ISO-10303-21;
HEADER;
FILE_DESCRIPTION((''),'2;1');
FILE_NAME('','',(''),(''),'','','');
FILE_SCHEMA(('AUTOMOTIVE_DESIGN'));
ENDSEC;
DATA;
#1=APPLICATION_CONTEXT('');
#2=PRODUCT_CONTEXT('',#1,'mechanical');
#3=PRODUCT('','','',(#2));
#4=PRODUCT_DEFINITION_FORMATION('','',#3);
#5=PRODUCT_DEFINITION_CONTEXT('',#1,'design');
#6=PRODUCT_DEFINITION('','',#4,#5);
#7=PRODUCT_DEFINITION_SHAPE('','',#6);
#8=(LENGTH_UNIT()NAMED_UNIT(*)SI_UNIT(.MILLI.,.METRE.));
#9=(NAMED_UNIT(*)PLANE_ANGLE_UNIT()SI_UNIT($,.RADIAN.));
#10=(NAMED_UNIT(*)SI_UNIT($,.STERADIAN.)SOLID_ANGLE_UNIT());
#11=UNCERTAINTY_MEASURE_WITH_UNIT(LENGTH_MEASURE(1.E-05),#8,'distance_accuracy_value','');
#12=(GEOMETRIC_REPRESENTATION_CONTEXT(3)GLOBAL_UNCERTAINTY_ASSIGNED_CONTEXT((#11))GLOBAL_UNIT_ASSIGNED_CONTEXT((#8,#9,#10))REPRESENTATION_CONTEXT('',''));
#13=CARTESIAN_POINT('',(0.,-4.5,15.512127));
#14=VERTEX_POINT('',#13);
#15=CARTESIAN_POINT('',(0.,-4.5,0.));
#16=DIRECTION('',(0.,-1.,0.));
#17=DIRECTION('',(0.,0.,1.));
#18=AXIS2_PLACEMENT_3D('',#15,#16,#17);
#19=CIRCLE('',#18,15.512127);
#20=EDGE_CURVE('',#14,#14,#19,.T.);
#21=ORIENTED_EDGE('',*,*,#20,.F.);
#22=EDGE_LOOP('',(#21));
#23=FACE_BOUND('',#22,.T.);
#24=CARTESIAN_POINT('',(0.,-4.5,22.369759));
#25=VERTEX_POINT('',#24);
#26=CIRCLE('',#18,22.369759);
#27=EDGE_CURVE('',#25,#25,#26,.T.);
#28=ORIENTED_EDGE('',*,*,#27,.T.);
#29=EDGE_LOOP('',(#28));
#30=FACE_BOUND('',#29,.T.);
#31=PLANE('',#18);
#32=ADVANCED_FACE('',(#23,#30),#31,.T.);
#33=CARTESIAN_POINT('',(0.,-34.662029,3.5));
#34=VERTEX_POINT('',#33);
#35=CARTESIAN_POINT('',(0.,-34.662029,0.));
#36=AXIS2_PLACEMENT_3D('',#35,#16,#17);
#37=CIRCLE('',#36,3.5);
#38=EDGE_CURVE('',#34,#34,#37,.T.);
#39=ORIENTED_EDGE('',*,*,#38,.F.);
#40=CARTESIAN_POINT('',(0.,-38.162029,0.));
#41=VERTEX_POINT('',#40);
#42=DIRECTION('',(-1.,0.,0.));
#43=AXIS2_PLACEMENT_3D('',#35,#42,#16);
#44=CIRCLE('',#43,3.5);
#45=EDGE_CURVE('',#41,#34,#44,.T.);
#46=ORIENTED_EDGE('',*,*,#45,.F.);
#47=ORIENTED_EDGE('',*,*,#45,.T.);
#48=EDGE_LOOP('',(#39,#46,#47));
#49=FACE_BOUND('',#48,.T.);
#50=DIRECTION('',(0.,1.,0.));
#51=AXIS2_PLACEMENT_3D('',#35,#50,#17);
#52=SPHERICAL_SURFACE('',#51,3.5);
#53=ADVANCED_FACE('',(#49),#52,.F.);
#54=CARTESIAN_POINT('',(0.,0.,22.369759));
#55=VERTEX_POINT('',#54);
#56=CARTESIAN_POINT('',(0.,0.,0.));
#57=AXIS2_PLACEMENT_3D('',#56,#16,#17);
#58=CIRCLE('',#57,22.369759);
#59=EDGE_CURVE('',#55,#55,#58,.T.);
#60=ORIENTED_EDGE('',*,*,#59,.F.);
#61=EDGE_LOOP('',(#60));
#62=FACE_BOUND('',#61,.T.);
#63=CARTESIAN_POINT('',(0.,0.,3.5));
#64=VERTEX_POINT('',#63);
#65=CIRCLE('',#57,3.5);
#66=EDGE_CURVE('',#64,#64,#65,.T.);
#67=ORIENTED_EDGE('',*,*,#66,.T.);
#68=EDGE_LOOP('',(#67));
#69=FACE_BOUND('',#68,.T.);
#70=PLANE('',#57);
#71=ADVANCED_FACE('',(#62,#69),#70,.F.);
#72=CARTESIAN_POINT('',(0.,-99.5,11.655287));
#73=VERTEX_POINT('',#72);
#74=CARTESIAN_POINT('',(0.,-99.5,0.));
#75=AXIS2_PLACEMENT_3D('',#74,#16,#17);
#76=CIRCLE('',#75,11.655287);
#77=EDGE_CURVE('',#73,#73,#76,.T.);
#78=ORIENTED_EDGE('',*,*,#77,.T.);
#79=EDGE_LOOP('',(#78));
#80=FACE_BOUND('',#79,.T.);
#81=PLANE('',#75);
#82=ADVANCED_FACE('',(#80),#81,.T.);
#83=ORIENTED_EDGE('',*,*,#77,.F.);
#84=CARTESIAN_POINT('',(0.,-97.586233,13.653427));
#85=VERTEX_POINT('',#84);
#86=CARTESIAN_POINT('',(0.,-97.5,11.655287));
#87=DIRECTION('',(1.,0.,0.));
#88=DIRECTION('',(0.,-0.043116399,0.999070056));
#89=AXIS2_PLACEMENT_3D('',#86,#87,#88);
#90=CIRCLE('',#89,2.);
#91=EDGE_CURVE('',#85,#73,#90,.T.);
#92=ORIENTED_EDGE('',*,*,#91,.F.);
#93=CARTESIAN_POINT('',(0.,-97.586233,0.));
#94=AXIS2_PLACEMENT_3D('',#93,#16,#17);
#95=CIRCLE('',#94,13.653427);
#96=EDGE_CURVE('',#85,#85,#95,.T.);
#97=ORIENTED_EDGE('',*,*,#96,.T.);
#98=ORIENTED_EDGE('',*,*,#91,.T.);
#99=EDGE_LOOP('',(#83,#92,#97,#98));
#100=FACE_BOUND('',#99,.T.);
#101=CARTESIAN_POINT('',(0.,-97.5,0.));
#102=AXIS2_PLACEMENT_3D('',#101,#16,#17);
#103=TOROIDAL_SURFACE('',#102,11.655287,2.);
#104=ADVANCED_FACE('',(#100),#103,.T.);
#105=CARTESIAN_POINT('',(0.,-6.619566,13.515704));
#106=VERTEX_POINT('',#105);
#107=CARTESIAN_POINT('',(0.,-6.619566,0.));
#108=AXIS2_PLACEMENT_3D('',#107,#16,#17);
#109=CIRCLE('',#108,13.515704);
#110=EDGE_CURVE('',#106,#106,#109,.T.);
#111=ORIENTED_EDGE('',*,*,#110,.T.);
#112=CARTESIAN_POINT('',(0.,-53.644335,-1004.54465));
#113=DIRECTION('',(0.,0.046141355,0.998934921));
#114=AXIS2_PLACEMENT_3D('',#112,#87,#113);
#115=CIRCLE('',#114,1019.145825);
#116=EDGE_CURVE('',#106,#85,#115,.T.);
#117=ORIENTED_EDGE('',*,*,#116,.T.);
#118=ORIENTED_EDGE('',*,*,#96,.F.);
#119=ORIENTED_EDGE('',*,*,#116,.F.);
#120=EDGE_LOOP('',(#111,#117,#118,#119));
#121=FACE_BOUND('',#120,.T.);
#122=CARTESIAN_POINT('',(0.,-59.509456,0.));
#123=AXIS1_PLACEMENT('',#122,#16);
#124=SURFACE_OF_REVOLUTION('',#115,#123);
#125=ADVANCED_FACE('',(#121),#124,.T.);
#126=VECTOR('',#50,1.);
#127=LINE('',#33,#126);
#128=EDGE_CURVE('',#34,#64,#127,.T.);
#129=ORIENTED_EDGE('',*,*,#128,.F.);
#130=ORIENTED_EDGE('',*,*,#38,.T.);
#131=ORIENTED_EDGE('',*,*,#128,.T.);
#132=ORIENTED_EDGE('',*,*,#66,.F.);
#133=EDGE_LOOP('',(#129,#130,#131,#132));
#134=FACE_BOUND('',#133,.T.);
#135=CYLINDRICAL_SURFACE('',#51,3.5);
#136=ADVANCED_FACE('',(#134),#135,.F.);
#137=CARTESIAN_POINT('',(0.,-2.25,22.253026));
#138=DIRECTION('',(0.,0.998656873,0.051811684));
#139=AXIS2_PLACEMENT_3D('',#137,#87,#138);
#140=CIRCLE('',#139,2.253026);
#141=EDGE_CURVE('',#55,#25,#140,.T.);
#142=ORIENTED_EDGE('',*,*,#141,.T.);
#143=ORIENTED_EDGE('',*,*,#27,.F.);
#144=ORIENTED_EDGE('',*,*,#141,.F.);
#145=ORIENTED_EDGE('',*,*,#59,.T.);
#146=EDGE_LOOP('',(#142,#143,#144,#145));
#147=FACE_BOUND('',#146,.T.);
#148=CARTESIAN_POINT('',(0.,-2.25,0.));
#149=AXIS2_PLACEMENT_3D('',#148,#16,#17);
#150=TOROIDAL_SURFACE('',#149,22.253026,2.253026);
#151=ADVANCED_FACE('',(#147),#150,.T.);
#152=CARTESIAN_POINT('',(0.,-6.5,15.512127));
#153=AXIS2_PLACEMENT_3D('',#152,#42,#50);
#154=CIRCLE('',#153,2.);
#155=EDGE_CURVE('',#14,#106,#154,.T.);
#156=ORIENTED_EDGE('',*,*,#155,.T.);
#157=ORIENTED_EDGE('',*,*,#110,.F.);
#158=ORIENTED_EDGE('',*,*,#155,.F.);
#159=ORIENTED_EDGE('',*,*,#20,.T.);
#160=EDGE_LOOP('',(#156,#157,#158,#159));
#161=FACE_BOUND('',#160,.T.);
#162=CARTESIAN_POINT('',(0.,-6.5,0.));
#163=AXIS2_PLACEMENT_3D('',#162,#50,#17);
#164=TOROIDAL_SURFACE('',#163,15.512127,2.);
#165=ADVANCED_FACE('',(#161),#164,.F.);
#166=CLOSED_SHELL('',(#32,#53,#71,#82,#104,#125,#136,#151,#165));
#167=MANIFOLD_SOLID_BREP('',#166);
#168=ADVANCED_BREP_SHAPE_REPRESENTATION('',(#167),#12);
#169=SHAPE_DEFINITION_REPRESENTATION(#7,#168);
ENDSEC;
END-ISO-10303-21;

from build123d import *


# Not quite as in the source:
# - a feature names something its author has since deleted; it is built from what else it names


with BuildPart() as f1:
    # F0 (on Right) → F1 (revolve)
    with BuildSketch(Plane.YZ):
        with BuildLine():
            Line((-4.49999996, 22.3697591573), (-4.49999996, 15.5121270956))
            ThreePointArc((-4.49999996, 15.5121270956), (-5.128710844, 14.0562541066), (-6.6195661202, 13.5157043114))
            ThreePointArc((-6.6195661202, 13.5157043114), (-52.1013620917, 14.6000076136), (-97.5862327976, 13.6534267626))
            ThreePointArc((-97.5862327976, 13.6534267626), (-98.9443797276, 13.038676402), (-99.5, 11.6552866512))
            Line((-99.5, 11.6552866512), (-99.5, 0))
            Line((-99.5, 0), (-38.1620294721, 0))
            ThreePointArc((-38.1620294721, 0), (-37.1369032063, 2.4748737342), (-34.6620294721, 3.5))
            Line((-34.6620294721, 3.5), (0, 3.5))
            Line((0, 3.5), (0, 22.3697591573))
            ThreePointArc((0, 22.3697591573), (-2.24999998, 24.5060521618), (-4.49999996, 22.3697591573))
        make_face()
    revolve(axis=Axis((0, -59.5094561577, 0), (0, -1, 0)))


solid = f1.part
